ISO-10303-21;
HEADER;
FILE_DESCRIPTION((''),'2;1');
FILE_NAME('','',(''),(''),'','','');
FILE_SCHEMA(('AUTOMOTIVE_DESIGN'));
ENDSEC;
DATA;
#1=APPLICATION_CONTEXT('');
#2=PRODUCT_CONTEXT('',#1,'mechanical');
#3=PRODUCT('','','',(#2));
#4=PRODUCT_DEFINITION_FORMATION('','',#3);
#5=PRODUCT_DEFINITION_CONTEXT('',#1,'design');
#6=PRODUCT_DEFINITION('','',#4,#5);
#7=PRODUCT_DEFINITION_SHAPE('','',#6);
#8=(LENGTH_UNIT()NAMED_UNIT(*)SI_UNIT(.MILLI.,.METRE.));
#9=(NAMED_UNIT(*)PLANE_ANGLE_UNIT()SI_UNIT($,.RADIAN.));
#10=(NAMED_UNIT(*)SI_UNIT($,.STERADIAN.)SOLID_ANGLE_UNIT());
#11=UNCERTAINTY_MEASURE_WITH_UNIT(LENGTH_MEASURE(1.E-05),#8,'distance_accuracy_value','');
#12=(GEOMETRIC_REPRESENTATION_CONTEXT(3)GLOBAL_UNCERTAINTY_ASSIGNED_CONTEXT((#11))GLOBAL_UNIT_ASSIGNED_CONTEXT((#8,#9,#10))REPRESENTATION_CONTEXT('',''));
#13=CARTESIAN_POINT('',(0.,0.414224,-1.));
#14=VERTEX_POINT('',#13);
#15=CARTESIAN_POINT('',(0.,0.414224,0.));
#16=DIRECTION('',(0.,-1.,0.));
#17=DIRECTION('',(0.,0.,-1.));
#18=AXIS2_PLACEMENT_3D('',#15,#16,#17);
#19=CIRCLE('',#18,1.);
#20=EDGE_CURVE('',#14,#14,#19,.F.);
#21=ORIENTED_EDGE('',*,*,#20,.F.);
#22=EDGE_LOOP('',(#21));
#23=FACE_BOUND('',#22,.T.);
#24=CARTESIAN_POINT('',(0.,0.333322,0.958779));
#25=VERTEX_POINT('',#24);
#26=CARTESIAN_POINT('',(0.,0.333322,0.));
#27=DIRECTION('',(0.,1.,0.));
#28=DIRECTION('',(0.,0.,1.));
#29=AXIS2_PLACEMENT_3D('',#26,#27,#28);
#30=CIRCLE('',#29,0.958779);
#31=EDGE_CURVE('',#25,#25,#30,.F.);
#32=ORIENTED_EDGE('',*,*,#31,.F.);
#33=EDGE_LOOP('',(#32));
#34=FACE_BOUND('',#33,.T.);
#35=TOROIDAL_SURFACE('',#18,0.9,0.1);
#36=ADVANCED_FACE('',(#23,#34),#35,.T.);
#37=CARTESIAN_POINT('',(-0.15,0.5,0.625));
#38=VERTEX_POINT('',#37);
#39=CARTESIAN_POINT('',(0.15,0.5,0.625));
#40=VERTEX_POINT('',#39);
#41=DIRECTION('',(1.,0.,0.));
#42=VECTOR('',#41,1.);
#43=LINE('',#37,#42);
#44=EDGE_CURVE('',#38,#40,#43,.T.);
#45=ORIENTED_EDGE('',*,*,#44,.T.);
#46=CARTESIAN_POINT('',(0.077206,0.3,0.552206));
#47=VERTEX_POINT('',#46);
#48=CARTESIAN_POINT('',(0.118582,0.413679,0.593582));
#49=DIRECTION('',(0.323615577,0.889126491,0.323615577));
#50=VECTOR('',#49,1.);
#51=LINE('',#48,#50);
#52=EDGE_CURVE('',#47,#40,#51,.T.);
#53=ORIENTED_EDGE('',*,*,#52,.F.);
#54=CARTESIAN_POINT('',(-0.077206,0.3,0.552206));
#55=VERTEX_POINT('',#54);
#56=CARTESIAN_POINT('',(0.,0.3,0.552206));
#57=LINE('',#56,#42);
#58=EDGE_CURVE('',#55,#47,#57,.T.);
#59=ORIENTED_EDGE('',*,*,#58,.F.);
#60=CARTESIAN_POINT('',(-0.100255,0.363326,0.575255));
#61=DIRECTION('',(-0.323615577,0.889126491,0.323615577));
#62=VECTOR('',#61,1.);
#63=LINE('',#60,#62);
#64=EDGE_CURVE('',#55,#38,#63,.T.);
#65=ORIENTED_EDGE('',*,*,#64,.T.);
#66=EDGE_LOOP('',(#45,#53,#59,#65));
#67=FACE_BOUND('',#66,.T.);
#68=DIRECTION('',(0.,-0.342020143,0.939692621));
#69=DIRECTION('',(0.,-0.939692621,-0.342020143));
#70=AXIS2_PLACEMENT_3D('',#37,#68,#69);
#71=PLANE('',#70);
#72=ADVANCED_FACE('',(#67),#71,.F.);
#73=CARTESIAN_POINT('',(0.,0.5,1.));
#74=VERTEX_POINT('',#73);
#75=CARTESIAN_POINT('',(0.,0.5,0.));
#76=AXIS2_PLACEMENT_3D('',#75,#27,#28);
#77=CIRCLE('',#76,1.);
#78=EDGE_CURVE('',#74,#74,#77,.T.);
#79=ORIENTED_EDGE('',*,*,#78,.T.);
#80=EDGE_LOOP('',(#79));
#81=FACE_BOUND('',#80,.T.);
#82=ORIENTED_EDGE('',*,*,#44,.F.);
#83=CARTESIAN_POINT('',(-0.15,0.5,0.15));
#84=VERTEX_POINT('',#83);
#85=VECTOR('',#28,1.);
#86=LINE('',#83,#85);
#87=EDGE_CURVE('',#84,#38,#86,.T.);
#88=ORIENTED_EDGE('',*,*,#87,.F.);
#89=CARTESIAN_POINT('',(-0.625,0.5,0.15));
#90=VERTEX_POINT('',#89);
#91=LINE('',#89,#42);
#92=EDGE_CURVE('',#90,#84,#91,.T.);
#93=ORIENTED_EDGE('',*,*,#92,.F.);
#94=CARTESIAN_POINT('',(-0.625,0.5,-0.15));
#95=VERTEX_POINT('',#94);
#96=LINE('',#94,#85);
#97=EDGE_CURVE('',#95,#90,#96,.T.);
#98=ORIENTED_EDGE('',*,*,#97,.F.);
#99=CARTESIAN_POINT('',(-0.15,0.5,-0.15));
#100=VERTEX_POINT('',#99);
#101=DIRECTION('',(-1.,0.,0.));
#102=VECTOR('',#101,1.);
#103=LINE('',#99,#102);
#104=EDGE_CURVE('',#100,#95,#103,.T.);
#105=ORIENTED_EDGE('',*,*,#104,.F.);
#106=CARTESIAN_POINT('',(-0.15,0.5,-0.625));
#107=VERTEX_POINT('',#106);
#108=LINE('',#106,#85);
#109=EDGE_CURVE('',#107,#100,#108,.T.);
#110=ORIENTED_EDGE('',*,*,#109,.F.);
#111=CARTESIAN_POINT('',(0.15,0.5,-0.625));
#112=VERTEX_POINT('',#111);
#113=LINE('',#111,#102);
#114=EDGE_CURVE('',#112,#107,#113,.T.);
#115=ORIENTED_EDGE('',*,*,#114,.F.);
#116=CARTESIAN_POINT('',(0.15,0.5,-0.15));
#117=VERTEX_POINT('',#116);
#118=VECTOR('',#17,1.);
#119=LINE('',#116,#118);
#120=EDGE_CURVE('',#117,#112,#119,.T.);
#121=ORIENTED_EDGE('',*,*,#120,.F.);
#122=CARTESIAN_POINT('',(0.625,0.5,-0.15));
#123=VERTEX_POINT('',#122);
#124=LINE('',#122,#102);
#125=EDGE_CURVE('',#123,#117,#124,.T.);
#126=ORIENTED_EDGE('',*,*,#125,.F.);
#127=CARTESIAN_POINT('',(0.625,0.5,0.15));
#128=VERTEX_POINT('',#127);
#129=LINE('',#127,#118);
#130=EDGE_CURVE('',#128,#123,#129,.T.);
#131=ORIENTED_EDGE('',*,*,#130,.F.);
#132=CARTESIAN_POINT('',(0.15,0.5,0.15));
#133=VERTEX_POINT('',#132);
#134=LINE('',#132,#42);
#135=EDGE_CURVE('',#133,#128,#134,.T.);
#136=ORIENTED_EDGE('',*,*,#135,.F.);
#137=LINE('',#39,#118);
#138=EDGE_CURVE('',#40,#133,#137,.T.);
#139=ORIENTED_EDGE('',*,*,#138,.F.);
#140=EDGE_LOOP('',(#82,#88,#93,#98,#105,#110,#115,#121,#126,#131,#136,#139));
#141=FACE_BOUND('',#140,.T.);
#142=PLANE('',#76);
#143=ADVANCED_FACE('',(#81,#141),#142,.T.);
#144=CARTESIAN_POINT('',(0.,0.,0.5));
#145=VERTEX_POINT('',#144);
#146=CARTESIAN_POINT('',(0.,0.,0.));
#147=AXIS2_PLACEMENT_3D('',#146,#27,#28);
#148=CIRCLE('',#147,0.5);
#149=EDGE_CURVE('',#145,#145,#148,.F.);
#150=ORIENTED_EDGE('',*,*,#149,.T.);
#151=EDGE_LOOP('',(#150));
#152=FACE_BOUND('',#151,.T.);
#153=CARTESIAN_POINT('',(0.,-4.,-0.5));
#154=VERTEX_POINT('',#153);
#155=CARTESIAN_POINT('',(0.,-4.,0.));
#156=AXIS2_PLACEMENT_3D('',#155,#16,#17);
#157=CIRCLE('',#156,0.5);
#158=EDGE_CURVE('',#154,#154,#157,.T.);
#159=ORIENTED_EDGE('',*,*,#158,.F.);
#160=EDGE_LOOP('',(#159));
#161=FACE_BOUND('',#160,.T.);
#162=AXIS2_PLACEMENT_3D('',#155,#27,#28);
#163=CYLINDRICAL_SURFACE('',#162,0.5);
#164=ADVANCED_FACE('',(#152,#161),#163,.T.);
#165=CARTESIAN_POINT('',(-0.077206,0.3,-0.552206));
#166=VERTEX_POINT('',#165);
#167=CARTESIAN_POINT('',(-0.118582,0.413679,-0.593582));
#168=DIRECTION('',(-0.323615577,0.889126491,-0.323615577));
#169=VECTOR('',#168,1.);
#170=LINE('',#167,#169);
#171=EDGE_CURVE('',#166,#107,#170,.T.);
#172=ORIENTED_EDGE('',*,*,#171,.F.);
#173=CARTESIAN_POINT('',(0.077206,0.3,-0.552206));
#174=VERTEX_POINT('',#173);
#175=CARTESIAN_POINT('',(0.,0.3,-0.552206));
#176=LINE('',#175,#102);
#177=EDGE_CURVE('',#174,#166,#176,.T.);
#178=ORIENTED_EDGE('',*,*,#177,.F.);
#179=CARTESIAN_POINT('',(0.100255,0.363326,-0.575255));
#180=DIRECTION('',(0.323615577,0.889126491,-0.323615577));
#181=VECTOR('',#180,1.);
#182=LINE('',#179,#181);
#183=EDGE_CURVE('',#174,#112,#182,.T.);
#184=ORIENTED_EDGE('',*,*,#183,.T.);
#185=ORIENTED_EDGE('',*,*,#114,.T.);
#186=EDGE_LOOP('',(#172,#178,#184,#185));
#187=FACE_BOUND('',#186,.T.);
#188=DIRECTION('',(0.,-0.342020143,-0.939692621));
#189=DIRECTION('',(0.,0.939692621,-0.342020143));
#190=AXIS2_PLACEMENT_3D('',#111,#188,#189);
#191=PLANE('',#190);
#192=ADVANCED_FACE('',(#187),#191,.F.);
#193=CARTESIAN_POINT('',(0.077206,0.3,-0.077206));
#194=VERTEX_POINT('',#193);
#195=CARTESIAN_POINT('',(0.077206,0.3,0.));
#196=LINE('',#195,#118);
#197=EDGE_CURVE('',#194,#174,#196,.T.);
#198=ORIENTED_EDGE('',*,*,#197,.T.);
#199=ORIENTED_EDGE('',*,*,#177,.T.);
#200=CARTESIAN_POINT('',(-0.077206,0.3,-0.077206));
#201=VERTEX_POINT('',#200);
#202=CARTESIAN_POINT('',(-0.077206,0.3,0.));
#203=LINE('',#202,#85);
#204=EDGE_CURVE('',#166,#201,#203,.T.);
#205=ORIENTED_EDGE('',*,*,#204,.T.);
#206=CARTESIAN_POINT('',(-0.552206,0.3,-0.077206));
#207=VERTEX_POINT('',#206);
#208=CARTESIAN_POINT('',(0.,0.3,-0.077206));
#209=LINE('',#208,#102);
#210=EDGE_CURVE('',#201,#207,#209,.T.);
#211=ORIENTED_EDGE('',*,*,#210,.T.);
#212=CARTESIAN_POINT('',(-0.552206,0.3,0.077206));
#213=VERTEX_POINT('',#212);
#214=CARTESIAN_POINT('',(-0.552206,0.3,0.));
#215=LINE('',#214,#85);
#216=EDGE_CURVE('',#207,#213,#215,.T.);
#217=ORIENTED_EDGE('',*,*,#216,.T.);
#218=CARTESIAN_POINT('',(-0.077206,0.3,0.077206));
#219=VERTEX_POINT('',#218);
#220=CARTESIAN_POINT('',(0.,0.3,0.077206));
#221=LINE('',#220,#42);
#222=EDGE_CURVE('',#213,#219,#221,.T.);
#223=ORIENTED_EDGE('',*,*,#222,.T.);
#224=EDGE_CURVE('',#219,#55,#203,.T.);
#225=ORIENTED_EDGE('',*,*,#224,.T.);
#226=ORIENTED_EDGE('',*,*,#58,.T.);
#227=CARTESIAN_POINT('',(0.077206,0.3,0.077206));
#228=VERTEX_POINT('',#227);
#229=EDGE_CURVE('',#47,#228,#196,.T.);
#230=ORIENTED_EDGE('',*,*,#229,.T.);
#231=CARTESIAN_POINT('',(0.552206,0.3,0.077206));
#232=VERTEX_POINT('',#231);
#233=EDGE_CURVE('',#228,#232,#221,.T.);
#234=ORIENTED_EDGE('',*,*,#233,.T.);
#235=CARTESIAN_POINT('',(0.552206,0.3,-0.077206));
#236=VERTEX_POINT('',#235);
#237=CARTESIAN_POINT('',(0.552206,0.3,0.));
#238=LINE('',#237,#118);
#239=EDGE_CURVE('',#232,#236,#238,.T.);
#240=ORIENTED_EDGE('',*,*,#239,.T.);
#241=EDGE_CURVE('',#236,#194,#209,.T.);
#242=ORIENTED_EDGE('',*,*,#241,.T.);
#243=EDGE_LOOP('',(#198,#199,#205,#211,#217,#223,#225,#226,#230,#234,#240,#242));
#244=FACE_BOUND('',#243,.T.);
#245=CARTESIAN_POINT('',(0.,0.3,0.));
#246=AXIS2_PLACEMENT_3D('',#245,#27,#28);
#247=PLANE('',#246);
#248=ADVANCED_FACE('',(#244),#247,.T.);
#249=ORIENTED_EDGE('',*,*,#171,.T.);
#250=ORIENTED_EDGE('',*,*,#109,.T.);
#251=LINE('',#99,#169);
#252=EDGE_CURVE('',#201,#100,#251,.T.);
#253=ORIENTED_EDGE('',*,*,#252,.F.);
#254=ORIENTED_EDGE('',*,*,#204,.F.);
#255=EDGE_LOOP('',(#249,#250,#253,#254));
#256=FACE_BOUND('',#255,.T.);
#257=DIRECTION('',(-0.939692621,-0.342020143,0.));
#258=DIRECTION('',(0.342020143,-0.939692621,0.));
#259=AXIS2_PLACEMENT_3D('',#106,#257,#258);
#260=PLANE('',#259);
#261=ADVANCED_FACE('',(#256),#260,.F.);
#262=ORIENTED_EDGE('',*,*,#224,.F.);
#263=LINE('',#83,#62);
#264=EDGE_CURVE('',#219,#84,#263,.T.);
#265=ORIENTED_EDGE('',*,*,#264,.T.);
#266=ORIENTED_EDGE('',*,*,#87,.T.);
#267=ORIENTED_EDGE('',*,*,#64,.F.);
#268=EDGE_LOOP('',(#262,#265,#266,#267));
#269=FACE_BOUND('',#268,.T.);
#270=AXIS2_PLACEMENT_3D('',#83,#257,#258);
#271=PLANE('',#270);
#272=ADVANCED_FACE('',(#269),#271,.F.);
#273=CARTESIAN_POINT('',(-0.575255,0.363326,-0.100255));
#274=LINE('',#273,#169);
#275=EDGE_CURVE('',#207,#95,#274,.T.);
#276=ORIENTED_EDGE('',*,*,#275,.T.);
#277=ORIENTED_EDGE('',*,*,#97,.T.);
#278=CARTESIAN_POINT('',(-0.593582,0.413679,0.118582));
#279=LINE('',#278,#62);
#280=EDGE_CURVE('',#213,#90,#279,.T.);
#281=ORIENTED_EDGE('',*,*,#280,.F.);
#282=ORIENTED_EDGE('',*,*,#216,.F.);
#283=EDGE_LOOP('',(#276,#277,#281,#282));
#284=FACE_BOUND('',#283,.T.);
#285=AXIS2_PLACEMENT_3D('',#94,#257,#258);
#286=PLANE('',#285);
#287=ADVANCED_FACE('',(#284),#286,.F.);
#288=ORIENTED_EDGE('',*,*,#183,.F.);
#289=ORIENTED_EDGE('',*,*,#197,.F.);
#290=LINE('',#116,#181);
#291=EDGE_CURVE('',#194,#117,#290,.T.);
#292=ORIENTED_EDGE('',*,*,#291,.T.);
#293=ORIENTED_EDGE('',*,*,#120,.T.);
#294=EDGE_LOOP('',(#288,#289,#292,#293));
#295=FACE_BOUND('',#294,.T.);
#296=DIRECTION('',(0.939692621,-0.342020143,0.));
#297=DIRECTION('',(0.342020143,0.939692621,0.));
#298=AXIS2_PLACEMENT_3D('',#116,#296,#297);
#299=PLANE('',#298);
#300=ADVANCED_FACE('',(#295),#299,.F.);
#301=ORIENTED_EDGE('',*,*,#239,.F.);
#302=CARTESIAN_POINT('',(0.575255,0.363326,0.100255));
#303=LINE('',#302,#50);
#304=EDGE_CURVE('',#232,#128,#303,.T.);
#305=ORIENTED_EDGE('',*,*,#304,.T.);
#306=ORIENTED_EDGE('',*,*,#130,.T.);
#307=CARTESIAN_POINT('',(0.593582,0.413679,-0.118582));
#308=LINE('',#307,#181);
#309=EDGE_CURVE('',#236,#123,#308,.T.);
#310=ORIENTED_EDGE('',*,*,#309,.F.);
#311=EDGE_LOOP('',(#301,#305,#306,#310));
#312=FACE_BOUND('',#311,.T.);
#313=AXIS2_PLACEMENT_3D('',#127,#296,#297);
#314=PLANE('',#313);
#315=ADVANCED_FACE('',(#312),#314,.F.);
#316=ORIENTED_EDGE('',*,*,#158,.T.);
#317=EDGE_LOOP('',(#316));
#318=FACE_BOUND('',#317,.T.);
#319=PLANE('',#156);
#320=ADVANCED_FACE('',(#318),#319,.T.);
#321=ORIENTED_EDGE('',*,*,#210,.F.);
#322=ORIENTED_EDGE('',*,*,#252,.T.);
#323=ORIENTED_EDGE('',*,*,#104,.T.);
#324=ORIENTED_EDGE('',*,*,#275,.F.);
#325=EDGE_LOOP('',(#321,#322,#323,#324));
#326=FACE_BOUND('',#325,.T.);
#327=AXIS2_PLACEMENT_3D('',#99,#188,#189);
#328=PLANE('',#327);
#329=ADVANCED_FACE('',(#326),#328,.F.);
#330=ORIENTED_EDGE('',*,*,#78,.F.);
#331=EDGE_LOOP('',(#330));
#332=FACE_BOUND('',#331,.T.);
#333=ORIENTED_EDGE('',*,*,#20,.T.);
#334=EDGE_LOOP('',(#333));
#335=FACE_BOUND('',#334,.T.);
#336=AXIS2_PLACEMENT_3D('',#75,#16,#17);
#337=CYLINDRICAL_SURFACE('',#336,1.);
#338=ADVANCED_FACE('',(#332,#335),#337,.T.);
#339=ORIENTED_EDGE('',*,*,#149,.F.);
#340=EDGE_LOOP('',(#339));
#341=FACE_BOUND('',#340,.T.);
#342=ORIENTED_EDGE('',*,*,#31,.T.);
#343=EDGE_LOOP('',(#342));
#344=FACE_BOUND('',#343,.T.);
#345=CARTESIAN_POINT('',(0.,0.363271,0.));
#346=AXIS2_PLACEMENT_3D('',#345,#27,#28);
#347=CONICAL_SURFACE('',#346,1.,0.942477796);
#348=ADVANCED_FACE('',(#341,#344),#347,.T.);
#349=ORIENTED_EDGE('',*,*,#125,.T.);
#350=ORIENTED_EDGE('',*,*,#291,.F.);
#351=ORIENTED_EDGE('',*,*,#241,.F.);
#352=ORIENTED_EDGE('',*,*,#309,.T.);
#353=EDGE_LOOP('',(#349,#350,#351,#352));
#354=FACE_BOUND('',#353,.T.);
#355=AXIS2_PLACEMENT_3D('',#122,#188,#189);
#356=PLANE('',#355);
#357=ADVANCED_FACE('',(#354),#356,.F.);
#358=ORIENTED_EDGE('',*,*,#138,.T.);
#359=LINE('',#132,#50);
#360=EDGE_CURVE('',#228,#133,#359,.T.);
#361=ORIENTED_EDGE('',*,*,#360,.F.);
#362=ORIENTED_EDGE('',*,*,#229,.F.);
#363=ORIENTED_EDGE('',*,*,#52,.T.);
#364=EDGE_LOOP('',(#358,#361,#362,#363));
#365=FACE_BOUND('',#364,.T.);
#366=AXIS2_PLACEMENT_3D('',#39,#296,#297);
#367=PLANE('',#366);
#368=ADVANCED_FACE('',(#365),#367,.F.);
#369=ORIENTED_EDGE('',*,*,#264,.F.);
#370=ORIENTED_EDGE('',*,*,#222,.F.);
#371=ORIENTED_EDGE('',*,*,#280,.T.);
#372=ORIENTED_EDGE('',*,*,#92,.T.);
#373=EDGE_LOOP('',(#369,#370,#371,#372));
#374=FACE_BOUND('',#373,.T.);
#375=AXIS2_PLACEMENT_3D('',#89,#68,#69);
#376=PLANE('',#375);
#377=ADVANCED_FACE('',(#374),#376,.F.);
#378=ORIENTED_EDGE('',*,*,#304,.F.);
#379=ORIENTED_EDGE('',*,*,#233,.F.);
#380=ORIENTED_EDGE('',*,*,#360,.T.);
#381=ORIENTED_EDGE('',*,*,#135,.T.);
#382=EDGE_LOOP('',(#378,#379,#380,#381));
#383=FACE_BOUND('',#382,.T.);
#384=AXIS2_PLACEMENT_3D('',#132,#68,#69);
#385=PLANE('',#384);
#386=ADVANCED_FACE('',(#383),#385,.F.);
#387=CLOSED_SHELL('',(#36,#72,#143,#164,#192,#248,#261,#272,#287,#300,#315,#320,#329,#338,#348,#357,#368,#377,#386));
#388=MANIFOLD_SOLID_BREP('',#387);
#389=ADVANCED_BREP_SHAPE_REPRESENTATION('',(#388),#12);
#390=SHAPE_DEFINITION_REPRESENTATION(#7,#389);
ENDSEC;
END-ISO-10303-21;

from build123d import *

# Parameters (mm, degrees)
SKETCH1_R           = 1
BOSS_EXTRUDE1_DEPTH = 0.5
CUT_EXTRUDE1_DEPTH  = 0.2
CUT_EXTRUDE1_DRAFT  = -20
SKETCH3_R           = 0.5
BOSS_EXTRUDE2_DEPTH = 4
CHAMFER1_SIZE       = 0.363271264
CHAMFER1_SIZE_2     = 0.5
FILLET1_R           = 0.1


with BuildPart() as part:
    # Sketch1 → Boss-Extrude1 (new body)
    with BuildSketch(Plane(origin=(0, 0, 0), x_dir=(1, 0, 0), z_dir=(0, 1, 0))):
        with Locations(Location((0, 0, 0), (0, 0, 270))):
            Circle(SKETCH1_R)
    extrude(amount=BOSS_EXTRUDE1_DEPTH)


with BuildPart() as cut_extrude1_tool:
    # Sketch2 → Cut-Extrude1 (with draft: the straight prism first)
    with BuildSketch(Plane(origin=(0, 0.5, 0), x_dir=(1, 0, 0), z_dir=(0, 1, 0))):
        Polygon((-0.15, 0.625), (-0.15, 0.15), (-0.625, 0.15), (-0.625, -0.15), (-0.15, -0.15), (-0.15, -0.625), (0.15, -0.625), (0.15, -0.15), (0.625, -0.15), (0.625, 0.15), (0.15, 0.15), (0.15, 0.625), align=None)
    extrude(amount=-CUT_EXTRUDE1_DEPTH)
    # Cut-Extrude1: the draft: its side faces are tilted about the plane it starts from
    cut_extrude1_sides = [cut_extrude1_tool.faces().sort_by_distance(p)[0] for p in [
        (-0.15, 0.4, -0.3875),
        (-0.3875, 0.4, -0.15),
        (-0.625, 0.4, 0),
        (-0.3875, 0.4, 0.15),
        (-0.15, 0.4, 0.3875),
        (0, 0.4, 0.625),
        (0.15, 0.4, 0.3875),
        (0.3875, 0.4, 0.15),
        (0.625, 0.4, 0),
        (0.3875, 0.4, -0.15),
        (0.15, 0.4, -0.3875),
        (0, 0.4, -0.625),
    ]]
    draft(cut_extrude1_sides, Plane(origin=(0, 0.5, 0), x_dir=(1, 0, 0), z_dir=(0, 1, 0)), CUT_EXTRUDE1_DRAFT)


with BuildPart() as part_1:
    add(part.part)

    # Cut-Extrude1: cut by cut_extrude1_tool
    add(cut_extrude1_tool.part, mode=Mode.SUBTRACT)

    # Sketch3 → Boss-Extrude2 (add)
    with BuildSketch(Plane.XZ):
        with Locations(Location((0, 0, 0), (0, 0, 90))):
            Circle(SKETCH3_R)
    extrude(amount=BOSS_EXTRUDE2_DEPTH)

    # Chamfer1
    # the kernel refuses this chamfer: 0.5, 0.363271264 mm, written as the material it takes off along each edge
    with BuildSketch(Plane(origin=(0, 0, 0), x_dir=(0, 0, 1), z_dir=(-1, 0, 0))) as chamfer1_piece_1_section:
        Polygon((1, CHAMFER1_SIZE), (1 - CHAMFER1_SIZE_2, 0), (1, 0), align=None)
    chamfer1_piece_1 = revolve(axis=Axis((0, 0, 0), (0, 1, 0)), mode=Mode.PRIVATE)
    chamfer1_piece_1 = chamfer1_piece_1 - Plane(origin=(0, 0.180960424, 0), x_dir=(0, 0, 1), z_dir=(0, 1, 0)) * Cylinder(0.5, 4, mode=Mode.PRIVATE)
    add(chamfer1_piece_1, mode=Mode.SUBTRACT)

    # Fillet1
    fillet1_edges = [part_1.edges().sort_by_distance(p)[0] for p in [
        (0, 0.363271264, -1),
    ]]
    fillet(fillet1_edges, radius=FILLET1_R)


solid = part_1.part
